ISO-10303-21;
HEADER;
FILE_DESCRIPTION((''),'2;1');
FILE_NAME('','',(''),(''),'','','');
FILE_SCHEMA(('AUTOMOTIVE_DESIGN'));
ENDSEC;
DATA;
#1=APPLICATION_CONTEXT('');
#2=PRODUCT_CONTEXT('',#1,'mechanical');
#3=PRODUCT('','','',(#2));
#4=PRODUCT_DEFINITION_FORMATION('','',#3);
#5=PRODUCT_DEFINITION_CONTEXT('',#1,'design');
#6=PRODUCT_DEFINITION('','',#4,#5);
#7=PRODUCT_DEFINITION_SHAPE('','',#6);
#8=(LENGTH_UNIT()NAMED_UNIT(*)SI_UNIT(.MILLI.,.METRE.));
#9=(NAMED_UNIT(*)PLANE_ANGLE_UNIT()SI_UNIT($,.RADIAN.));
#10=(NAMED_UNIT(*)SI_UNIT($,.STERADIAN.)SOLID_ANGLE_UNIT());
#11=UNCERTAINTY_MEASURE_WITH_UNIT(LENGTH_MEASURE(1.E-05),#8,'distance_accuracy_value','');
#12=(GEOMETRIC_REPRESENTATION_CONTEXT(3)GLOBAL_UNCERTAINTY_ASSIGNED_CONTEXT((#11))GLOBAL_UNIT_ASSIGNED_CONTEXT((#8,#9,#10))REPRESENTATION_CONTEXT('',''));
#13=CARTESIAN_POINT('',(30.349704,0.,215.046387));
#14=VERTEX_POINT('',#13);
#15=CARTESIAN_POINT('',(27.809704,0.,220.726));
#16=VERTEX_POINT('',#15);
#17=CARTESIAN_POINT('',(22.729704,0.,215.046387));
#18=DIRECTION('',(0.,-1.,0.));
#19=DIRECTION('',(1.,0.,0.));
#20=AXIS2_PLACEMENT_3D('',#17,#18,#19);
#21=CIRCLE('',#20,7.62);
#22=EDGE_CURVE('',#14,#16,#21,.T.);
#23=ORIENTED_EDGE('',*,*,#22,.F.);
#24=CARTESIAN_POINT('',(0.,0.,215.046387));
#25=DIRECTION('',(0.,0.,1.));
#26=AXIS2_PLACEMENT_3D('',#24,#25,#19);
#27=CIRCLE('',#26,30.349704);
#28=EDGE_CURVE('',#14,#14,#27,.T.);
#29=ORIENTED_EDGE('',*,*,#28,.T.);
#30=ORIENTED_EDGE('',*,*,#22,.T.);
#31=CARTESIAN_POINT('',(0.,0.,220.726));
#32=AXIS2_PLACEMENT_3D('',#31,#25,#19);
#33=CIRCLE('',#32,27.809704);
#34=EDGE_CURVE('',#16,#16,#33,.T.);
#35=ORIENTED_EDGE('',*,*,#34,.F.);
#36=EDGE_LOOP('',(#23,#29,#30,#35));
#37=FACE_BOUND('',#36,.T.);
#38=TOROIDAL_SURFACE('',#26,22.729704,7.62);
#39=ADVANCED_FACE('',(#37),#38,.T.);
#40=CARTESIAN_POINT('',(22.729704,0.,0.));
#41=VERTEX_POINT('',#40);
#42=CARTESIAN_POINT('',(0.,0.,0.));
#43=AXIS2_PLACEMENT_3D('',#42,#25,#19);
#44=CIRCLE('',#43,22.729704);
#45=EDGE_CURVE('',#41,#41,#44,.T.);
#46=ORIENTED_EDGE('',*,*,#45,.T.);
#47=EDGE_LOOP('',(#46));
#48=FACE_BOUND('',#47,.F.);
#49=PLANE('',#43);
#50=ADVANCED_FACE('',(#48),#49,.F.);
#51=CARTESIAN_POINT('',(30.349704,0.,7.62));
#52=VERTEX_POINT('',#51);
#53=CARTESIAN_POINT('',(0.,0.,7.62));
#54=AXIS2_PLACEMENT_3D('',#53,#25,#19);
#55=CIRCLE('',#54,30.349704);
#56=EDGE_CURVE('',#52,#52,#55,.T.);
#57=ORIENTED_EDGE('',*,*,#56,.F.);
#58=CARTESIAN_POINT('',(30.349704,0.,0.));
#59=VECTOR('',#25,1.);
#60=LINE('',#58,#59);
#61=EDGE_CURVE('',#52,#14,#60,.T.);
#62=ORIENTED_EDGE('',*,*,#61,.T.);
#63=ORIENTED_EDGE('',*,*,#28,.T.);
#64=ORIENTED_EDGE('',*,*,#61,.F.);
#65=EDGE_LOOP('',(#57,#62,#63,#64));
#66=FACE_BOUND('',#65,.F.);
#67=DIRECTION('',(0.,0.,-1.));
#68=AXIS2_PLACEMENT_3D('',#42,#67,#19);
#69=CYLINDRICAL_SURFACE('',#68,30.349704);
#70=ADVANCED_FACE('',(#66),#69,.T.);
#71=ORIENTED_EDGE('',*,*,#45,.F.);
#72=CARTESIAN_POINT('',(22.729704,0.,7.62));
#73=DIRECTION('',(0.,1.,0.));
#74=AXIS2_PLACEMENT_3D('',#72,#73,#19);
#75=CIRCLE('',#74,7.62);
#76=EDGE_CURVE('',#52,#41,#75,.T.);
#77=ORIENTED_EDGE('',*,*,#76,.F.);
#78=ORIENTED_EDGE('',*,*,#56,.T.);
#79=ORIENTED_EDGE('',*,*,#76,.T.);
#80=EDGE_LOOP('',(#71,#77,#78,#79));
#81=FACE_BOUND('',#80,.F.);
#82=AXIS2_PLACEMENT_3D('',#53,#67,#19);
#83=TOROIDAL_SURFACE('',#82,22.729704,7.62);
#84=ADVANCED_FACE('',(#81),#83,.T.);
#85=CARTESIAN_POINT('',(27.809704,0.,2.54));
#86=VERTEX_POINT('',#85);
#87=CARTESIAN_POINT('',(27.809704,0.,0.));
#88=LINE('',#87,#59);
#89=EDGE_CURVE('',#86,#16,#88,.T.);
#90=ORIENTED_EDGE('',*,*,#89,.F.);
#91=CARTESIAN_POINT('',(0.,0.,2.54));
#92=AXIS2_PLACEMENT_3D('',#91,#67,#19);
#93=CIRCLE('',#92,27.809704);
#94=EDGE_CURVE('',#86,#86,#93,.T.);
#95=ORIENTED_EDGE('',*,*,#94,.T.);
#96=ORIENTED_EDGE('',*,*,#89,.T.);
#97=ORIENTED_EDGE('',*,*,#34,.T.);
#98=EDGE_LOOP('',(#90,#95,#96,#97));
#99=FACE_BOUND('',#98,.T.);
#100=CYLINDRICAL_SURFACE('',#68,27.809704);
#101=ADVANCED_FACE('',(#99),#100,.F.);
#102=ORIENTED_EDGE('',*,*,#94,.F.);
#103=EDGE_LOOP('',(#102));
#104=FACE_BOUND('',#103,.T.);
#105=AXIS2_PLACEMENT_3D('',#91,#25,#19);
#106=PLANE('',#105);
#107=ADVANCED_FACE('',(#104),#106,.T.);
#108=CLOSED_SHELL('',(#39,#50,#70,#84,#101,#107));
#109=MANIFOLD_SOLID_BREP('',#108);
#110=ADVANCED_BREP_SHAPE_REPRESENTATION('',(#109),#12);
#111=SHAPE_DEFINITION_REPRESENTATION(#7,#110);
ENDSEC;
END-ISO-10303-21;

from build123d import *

# Parameters (mm, degrees)
F0_R     = 30.3497039052
F1_DEPTH = 220.726
F2_T     = -2.54


# Not quite as in the source:
# - a fillet or chamfer that OpenCascade refuses, or shapes differently, is made with other operations: its cross-section is extruded or revolved along the edge and cut away or added


with BuildPart() as f1:
    # F0 (on Top) → F1 (new body)
    with BuildSketch(Plane.XY):
        Circle(F0_R)
    extrude(amount=F1_DEPTH)

    # F2
    f2_openings = [f1.faces().sort_by_distance(p)[0] for p in [
        (0, 0, 220.726),
    ]]
    offset(amount=F2_T, openings=f2_openings)

    # F3: fillet of radius 7.62 on 3 edges, made by hand

    # F3_s1 → F3_t2 (revolve, cut)
    with BuildSketch(Plane.XZ):
        with BuildLine():
            ThreePointArc((30.3497039052, 7.62), (28.1178575778, 2.2318463274), (22.7297039052, 0))
            Line((22.7297039052, 0), (30.3497039052, 0))
            Line((30.3497039052, 0), (30.3497039052, 7.62))
        make_face()
    revolve(axis=Axis((0, 0, 0), (0, 0, 1)), mode=Mode.SUBTRACT)

    # F3_s3 → F3_t4 (revolve, cut)
    with BuildSketch(Plane.XZ):
        with BuildLine():
            ThreePointArc((30.3497039052, 215.0463873372), (29.6857803855, 218.1572393105), (27.8097039052, 220.726))
            Line((27.8097039052, 220.726), (30.3497039052, 220.726))
            Line((30.3497039052, 220.726), (30.3497039052, 215.0463873372))
        make_face()
    revolve(axis=Axis((0, 0, 220.726), (0, 0, 1)), mode=Mode.SUBTRACT)


solid = f1.part
